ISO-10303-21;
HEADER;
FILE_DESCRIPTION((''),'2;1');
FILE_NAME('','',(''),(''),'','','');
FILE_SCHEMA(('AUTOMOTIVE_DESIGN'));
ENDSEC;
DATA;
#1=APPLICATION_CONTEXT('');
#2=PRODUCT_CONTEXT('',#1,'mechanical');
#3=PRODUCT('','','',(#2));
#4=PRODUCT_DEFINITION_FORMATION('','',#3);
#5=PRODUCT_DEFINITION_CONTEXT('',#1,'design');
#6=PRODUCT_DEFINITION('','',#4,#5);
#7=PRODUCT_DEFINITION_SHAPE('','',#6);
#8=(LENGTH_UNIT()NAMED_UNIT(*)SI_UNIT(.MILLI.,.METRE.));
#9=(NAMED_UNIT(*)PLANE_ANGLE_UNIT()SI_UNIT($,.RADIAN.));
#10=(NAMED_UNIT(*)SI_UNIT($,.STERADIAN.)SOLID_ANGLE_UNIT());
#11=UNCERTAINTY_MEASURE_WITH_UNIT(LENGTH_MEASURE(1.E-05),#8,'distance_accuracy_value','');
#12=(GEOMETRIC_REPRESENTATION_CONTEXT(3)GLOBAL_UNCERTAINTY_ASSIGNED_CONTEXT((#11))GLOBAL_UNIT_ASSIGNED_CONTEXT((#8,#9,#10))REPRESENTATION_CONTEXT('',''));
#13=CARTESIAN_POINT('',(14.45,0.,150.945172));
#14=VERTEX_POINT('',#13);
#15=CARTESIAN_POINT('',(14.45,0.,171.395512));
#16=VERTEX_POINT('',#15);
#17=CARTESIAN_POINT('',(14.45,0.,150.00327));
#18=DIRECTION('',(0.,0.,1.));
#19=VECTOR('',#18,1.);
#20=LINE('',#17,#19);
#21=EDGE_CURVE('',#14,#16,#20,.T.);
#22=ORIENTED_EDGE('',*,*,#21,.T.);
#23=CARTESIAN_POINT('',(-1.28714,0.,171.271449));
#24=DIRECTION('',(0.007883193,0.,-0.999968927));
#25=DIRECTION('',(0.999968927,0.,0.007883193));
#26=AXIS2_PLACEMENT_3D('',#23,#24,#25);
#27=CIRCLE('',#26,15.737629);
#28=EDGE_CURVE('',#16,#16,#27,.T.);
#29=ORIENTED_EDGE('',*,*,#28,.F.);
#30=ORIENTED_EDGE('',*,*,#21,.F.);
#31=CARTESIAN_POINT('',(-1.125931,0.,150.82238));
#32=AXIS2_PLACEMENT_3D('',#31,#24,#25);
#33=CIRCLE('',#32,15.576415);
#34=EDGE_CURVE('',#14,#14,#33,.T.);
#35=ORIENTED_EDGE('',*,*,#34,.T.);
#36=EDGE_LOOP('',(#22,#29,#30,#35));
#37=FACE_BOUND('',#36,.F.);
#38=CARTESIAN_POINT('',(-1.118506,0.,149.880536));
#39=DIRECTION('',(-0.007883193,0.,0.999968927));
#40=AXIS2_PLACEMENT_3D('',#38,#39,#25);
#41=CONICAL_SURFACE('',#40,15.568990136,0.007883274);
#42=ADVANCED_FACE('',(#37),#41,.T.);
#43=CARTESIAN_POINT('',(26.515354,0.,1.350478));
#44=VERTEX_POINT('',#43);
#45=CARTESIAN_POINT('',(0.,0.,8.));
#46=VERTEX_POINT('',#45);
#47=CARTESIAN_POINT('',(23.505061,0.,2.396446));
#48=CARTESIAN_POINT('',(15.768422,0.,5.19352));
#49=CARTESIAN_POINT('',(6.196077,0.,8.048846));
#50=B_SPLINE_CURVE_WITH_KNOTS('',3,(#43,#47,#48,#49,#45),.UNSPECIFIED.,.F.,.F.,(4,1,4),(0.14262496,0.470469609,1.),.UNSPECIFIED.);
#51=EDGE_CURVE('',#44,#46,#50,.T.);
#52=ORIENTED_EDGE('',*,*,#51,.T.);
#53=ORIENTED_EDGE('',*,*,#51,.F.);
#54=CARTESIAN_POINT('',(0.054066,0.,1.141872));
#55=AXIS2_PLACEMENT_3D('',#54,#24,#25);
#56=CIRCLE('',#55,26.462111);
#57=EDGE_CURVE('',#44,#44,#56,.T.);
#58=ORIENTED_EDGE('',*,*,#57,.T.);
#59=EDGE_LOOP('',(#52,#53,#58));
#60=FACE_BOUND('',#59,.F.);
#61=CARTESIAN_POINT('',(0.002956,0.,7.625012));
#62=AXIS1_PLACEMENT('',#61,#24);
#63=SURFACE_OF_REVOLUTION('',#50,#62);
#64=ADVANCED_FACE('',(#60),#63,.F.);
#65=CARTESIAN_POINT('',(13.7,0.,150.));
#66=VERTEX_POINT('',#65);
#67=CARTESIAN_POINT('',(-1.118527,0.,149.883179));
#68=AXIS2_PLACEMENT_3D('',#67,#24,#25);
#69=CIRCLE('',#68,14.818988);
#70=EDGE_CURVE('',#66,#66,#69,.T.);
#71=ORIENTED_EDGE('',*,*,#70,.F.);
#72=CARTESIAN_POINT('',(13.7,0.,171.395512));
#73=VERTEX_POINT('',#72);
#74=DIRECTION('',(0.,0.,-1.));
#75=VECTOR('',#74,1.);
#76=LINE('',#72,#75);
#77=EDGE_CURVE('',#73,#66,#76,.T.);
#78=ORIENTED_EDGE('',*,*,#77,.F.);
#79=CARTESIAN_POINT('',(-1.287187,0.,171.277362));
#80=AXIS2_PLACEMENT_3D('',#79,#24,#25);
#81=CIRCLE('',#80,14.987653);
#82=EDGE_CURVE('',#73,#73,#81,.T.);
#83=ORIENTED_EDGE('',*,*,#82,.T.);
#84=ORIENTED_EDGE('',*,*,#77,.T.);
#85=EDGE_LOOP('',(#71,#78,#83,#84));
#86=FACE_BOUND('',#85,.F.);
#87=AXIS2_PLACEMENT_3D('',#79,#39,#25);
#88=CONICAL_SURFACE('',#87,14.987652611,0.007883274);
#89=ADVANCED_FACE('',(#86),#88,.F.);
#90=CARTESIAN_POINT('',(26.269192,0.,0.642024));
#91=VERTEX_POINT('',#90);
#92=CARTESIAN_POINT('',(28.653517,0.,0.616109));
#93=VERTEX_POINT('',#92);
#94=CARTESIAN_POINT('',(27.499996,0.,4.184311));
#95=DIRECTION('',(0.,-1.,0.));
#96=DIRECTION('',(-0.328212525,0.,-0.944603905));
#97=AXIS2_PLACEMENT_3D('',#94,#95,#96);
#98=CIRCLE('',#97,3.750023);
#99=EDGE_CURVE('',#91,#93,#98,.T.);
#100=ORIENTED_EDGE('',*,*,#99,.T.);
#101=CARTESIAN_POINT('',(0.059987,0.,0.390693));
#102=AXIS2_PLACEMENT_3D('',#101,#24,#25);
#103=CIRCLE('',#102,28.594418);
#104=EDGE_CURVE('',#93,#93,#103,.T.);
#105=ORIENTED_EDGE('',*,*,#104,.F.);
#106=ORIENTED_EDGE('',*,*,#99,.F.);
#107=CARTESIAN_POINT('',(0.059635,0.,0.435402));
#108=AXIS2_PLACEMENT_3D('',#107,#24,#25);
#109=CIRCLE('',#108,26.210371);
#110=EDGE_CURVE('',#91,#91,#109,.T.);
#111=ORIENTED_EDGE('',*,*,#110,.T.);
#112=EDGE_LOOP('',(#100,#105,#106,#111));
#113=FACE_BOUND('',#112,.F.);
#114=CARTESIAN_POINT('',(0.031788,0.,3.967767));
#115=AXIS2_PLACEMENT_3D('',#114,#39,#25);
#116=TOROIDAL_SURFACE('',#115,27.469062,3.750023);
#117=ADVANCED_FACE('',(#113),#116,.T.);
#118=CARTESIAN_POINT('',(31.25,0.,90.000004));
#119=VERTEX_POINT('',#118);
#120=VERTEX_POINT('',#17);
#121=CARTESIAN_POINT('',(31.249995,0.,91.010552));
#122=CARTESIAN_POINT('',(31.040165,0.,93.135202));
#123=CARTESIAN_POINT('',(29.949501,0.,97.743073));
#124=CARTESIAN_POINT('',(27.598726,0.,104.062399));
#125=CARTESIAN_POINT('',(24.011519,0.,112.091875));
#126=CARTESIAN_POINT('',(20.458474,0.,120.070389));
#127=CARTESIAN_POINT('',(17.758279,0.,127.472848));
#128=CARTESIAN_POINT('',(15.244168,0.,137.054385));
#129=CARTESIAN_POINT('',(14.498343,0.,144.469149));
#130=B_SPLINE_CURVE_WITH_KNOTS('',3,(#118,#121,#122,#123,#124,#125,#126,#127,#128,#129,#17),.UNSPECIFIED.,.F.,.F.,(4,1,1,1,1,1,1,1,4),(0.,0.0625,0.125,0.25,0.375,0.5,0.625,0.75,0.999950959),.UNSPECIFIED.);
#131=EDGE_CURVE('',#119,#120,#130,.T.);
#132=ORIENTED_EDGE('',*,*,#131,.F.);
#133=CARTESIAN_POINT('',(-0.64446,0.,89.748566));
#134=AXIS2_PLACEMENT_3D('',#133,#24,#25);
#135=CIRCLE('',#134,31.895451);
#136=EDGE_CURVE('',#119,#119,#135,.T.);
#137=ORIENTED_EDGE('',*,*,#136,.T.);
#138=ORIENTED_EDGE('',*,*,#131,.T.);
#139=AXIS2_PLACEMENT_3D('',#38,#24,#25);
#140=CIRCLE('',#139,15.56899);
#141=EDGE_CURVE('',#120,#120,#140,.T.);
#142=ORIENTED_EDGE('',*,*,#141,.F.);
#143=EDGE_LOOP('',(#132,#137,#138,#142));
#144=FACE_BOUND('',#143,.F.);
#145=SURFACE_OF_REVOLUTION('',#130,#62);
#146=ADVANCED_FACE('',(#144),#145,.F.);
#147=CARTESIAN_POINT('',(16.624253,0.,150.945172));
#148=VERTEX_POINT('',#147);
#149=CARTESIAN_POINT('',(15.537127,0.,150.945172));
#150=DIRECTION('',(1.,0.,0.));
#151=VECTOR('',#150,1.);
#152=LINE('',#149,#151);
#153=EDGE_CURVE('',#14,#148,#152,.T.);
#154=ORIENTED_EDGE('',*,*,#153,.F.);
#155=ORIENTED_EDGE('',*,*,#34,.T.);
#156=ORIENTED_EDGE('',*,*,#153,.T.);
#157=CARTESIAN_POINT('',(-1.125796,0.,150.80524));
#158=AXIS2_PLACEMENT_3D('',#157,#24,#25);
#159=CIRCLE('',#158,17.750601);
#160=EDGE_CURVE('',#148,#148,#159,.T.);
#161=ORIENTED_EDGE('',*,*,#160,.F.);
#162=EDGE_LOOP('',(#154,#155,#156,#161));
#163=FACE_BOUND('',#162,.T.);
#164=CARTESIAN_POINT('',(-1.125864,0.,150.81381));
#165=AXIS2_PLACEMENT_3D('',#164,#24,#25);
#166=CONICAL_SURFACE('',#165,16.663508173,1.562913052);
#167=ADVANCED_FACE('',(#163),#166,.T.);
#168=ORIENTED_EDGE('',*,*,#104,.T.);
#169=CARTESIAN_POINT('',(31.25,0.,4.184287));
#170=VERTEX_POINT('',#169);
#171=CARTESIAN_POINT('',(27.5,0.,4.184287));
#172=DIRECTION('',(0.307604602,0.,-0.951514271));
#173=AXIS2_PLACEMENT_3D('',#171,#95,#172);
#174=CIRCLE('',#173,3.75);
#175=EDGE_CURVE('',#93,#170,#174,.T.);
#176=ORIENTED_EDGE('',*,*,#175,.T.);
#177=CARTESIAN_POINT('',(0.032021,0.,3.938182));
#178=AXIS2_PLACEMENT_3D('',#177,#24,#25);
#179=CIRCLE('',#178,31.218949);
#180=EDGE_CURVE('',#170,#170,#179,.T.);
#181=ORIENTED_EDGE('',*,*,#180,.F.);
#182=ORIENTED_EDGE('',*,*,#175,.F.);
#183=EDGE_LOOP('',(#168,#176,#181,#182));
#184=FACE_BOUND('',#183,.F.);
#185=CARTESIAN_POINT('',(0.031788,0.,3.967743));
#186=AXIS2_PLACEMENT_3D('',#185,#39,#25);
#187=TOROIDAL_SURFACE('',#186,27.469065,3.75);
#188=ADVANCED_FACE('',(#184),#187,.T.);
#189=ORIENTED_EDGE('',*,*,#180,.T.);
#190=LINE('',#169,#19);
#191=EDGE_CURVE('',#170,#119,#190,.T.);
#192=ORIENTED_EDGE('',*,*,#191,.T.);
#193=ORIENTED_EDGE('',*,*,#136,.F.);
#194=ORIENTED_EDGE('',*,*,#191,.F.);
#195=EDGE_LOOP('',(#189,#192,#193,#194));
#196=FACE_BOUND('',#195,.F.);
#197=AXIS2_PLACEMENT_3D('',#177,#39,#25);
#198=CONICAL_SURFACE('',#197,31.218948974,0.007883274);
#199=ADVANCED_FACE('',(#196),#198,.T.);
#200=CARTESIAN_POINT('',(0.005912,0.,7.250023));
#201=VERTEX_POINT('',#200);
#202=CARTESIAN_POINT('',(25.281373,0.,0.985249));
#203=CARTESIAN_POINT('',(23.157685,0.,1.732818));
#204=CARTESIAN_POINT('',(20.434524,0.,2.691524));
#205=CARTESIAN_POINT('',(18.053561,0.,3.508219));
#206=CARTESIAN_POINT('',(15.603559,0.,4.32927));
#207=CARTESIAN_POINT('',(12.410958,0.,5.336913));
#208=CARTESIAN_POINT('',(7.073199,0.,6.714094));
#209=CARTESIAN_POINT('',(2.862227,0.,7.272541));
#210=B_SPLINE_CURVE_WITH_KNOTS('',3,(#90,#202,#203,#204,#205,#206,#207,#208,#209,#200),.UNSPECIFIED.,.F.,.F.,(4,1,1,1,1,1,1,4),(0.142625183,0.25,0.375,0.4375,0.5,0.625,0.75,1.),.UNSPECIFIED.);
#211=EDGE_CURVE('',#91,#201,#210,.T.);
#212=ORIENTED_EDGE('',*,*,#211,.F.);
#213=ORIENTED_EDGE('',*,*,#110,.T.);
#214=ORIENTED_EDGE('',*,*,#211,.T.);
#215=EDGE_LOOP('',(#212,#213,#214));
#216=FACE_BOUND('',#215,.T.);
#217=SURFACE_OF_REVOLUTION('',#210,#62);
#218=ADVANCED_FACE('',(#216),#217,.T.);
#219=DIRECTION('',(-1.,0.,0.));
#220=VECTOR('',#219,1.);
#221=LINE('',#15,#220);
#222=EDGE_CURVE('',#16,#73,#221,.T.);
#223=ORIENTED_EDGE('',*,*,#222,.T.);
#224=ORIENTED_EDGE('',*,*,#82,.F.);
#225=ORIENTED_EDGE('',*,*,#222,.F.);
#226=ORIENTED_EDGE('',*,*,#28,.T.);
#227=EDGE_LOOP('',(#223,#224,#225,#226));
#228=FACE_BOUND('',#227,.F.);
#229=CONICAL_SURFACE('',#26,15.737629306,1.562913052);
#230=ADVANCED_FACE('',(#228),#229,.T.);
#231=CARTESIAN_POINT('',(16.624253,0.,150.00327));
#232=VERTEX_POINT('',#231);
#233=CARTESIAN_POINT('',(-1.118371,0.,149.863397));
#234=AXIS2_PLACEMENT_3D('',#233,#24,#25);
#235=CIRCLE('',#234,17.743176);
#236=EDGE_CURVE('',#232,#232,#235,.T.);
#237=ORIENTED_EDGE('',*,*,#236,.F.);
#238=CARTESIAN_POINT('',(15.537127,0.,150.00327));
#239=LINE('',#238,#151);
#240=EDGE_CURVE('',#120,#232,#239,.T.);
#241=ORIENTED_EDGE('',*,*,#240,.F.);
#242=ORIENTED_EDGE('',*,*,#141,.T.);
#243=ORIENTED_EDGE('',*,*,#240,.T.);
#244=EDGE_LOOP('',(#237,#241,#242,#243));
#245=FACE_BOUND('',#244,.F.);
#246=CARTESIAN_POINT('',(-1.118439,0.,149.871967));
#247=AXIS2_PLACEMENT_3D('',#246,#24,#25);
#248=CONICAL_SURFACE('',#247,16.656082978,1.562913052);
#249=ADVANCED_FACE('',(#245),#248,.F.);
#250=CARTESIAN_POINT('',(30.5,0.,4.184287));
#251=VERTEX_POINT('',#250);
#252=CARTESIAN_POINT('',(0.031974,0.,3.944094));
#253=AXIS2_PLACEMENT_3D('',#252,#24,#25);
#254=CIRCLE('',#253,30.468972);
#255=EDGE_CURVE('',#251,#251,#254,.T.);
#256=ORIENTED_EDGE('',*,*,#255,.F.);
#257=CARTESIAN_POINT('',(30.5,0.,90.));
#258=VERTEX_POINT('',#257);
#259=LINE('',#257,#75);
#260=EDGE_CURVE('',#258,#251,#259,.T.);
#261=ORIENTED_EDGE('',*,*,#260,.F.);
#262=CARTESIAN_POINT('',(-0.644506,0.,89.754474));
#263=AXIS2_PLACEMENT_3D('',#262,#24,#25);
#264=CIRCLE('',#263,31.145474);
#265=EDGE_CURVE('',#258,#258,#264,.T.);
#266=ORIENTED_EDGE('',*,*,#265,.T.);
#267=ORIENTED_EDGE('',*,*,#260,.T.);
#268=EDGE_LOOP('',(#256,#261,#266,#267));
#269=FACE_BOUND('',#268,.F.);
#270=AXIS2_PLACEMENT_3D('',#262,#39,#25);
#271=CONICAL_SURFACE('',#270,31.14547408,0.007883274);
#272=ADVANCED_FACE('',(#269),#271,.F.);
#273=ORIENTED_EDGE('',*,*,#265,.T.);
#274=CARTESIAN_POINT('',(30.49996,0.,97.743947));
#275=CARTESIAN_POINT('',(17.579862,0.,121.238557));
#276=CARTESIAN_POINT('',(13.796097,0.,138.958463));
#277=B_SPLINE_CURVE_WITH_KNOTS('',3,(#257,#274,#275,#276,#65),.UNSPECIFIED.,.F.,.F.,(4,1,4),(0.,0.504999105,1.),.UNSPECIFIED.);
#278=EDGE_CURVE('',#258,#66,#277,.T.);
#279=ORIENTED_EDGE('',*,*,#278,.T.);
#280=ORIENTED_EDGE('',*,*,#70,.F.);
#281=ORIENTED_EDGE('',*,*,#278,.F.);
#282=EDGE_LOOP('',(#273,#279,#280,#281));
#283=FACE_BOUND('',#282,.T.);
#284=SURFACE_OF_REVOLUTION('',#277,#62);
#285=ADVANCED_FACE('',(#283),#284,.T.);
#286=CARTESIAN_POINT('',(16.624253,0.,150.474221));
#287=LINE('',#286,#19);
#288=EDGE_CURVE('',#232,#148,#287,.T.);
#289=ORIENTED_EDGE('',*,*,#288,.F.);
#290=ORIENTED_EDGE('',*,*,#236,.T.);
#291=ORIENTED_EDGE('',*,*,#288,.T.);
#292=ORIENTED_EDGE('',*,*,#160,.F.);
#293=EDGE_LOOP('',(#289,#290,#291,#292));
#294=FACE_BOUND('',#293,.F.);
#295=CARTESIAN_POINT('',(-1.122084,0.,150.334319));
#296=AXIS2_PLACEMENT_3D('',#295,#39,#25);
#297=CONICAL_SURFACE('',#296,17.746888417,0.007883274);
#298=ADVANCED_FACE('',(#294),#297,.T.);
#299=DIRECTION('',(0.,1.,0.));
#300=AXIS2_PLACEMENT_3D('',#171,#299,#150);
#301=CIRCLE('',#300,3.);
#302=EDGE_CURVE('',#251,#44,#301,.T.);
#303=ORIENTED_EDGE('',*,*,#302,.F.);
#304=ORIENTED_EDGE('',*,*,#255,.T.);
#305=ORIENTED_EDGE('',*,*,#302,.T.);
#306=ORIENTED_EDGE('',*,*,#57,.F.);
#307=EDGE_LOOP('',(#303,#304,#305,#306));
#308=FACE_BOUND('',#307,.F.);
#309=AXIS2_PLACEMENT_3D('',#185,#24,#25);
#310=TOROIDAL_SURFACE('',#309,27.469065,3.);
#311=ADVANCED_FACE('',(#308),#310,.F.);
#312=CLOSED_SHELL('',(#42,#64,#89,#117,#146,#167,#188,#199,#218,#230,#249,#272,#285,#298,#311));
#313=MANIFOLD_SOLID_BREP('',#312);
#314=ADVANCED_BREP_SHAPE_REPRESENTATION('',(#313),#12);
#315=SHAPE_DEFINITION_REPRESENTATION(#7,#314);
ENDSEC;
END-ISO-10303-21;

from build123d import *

# Parameters (mm, degrees)
F0_W = 2.1742532432
F0_H = 0.9419020339


# Not quite as in the source:
# - ends of sketch curves that miss each other by under 0.0002 mm in the source are joined
# - the dataset's text gives a spline's control points without its knots; the knots are read off the source's solid


with BuildPart() as f1:
    # F0 (on Front) → F1 (revolve)
    with BuildSketch(Plane.XZ):
        with BuildLine():
            Line((30.5, 90), (30.5, 4.1842871582))
            ThreePointArc((30.5, 4.1842871582), (29.2386865937, 1.7395031332), (26.5153540474, 1.3504783524))
            add(Edge.make_bspline(
                [(28.6535172577, 0.6161086402), (27.9351354208, 0.8594614999), (27.2238062641, 1.1043168589), (26.5153540474, 1.3504783524)],
                knots=[0.0654689301, 0.0654689301, 0.0654689301, 0.0654689301, 0.1426249603, 0.1426249603, 0.1426249603, 0.1426249603], degree=3))
            ThreePointArc((28.6535172577, 0.6161086402), (30.5321765876, 1.9778408883), (31.25, 4.1842871582))
            Line((31.25, 4.1842871582), (31.25, 90.000003855))
            add(Edge.make_bspline(
                [(31.25, 90.000003855), (31.2499948057, 91.0105522306), (31.0401649353, 93.1352024306), (29.9495012867, 97.7430729313), (27.5987257036, 104.0623990971), (24.0115192635, 112.0918752945), (20.4584738513, 120.0703885968), (17.7582794948, 127.4728481178), (15.2441676605, 137.0543853988), (14.4983428208, 144.4691488625), (14.4499999999, 150.0032696799)],
                knots=[0, 0, 0, 0, 0.0625, 0.125, 0.25, 0.375, 0.5, 0.625, 0.75, 0.9999509591, 0.9999509591, 0.9999509591, 0.9999509591], degree=3))
            Line((14.45, 150.0032696799), (14.45, 150.9451717138))
            Line((14.45, 150.9451717138), (14.45, 171.3955121697))
            Line((14.45, 171.3955121697), (13.7, 171.3955121697))
            Line((13.7, 171.3955121697), (13.7, 150))
            add(Edge.make_bspline(
                [(30.5, 90), (30.4999601958, 97.7439469245), (17.5798622294, 121.2385566117), (13.7960969357, 138.9584630881), (13.7, 150)],
                knots=[0, 0, 0, 0, 0.5049991048, 1, 1, 1, 1], degree=3))
        make_face()
        with BuildLine():
            add(Edge.make_bspline(
                [(28.6535172577, 0.6161086402), (27.9351354208, 0.8594614999), (27.2238062641, 1.1043168589), (26.5153540474, 1.3504783524)],
                knots=[0.0654689301, 0.0654689301, 0.0654689301, 0.0654689301, 0.1426249603, 0.1426249603, 0.1426249603, 0.1426249603], degree=3))
            add(Edge.make_bspline(
                [(26.5153540474, 1.3504783524), (23.505060911, 2.3964462197), (15.7684223832, 5.1935195764), (6.1960769817, 8.0488463864), (0, 8)],
                knots=[0.1426249603, 0.1426249603, 0.1426249603, 0.1426249603, 0.4704696092, 1, 1, 1, 1], degree=3))
            Line((0, 8), (0.0059123945, 7.2500233046))
            add(Edge.make_bspline(
                [(26.2691917605, 0.6420238521), (25.2813726049, 0.9852492871), (23.1576852685, 1.73281816), (20.4345242005, 2.6915237158), (18.0535614936, 3.508219), (15.6035591078, 4.32926986), (12.4109579359, 5.3369129826), (7.0731993079, 6.7140944287), (2.8622270402, 7.272540883), (0.0059123945, 7.2500233046)],
                knots=[0.1426251828, 0.1426251828, 0.1426251828, 0.1426251828, 0.25, 0.375, 0.4375, 0.5, 0.625, 0.75, 1, 1, 1, 1], degree=3))
            ThreePointArc((26.2691917605, 0.6420238521), (27.4592400633, 0.4345086811), (28.6535172577, 0.6161086402))
        make_face()
        with Locations((15.5371266216, 150.4742206969)):
            Rectangle(F0_W, F0_H)
    revolve(axis=Axis((0.0029561972, 0, 7.6250116523), (0.0078831927, 0, -0.9999689272)))


solid = f1.part
